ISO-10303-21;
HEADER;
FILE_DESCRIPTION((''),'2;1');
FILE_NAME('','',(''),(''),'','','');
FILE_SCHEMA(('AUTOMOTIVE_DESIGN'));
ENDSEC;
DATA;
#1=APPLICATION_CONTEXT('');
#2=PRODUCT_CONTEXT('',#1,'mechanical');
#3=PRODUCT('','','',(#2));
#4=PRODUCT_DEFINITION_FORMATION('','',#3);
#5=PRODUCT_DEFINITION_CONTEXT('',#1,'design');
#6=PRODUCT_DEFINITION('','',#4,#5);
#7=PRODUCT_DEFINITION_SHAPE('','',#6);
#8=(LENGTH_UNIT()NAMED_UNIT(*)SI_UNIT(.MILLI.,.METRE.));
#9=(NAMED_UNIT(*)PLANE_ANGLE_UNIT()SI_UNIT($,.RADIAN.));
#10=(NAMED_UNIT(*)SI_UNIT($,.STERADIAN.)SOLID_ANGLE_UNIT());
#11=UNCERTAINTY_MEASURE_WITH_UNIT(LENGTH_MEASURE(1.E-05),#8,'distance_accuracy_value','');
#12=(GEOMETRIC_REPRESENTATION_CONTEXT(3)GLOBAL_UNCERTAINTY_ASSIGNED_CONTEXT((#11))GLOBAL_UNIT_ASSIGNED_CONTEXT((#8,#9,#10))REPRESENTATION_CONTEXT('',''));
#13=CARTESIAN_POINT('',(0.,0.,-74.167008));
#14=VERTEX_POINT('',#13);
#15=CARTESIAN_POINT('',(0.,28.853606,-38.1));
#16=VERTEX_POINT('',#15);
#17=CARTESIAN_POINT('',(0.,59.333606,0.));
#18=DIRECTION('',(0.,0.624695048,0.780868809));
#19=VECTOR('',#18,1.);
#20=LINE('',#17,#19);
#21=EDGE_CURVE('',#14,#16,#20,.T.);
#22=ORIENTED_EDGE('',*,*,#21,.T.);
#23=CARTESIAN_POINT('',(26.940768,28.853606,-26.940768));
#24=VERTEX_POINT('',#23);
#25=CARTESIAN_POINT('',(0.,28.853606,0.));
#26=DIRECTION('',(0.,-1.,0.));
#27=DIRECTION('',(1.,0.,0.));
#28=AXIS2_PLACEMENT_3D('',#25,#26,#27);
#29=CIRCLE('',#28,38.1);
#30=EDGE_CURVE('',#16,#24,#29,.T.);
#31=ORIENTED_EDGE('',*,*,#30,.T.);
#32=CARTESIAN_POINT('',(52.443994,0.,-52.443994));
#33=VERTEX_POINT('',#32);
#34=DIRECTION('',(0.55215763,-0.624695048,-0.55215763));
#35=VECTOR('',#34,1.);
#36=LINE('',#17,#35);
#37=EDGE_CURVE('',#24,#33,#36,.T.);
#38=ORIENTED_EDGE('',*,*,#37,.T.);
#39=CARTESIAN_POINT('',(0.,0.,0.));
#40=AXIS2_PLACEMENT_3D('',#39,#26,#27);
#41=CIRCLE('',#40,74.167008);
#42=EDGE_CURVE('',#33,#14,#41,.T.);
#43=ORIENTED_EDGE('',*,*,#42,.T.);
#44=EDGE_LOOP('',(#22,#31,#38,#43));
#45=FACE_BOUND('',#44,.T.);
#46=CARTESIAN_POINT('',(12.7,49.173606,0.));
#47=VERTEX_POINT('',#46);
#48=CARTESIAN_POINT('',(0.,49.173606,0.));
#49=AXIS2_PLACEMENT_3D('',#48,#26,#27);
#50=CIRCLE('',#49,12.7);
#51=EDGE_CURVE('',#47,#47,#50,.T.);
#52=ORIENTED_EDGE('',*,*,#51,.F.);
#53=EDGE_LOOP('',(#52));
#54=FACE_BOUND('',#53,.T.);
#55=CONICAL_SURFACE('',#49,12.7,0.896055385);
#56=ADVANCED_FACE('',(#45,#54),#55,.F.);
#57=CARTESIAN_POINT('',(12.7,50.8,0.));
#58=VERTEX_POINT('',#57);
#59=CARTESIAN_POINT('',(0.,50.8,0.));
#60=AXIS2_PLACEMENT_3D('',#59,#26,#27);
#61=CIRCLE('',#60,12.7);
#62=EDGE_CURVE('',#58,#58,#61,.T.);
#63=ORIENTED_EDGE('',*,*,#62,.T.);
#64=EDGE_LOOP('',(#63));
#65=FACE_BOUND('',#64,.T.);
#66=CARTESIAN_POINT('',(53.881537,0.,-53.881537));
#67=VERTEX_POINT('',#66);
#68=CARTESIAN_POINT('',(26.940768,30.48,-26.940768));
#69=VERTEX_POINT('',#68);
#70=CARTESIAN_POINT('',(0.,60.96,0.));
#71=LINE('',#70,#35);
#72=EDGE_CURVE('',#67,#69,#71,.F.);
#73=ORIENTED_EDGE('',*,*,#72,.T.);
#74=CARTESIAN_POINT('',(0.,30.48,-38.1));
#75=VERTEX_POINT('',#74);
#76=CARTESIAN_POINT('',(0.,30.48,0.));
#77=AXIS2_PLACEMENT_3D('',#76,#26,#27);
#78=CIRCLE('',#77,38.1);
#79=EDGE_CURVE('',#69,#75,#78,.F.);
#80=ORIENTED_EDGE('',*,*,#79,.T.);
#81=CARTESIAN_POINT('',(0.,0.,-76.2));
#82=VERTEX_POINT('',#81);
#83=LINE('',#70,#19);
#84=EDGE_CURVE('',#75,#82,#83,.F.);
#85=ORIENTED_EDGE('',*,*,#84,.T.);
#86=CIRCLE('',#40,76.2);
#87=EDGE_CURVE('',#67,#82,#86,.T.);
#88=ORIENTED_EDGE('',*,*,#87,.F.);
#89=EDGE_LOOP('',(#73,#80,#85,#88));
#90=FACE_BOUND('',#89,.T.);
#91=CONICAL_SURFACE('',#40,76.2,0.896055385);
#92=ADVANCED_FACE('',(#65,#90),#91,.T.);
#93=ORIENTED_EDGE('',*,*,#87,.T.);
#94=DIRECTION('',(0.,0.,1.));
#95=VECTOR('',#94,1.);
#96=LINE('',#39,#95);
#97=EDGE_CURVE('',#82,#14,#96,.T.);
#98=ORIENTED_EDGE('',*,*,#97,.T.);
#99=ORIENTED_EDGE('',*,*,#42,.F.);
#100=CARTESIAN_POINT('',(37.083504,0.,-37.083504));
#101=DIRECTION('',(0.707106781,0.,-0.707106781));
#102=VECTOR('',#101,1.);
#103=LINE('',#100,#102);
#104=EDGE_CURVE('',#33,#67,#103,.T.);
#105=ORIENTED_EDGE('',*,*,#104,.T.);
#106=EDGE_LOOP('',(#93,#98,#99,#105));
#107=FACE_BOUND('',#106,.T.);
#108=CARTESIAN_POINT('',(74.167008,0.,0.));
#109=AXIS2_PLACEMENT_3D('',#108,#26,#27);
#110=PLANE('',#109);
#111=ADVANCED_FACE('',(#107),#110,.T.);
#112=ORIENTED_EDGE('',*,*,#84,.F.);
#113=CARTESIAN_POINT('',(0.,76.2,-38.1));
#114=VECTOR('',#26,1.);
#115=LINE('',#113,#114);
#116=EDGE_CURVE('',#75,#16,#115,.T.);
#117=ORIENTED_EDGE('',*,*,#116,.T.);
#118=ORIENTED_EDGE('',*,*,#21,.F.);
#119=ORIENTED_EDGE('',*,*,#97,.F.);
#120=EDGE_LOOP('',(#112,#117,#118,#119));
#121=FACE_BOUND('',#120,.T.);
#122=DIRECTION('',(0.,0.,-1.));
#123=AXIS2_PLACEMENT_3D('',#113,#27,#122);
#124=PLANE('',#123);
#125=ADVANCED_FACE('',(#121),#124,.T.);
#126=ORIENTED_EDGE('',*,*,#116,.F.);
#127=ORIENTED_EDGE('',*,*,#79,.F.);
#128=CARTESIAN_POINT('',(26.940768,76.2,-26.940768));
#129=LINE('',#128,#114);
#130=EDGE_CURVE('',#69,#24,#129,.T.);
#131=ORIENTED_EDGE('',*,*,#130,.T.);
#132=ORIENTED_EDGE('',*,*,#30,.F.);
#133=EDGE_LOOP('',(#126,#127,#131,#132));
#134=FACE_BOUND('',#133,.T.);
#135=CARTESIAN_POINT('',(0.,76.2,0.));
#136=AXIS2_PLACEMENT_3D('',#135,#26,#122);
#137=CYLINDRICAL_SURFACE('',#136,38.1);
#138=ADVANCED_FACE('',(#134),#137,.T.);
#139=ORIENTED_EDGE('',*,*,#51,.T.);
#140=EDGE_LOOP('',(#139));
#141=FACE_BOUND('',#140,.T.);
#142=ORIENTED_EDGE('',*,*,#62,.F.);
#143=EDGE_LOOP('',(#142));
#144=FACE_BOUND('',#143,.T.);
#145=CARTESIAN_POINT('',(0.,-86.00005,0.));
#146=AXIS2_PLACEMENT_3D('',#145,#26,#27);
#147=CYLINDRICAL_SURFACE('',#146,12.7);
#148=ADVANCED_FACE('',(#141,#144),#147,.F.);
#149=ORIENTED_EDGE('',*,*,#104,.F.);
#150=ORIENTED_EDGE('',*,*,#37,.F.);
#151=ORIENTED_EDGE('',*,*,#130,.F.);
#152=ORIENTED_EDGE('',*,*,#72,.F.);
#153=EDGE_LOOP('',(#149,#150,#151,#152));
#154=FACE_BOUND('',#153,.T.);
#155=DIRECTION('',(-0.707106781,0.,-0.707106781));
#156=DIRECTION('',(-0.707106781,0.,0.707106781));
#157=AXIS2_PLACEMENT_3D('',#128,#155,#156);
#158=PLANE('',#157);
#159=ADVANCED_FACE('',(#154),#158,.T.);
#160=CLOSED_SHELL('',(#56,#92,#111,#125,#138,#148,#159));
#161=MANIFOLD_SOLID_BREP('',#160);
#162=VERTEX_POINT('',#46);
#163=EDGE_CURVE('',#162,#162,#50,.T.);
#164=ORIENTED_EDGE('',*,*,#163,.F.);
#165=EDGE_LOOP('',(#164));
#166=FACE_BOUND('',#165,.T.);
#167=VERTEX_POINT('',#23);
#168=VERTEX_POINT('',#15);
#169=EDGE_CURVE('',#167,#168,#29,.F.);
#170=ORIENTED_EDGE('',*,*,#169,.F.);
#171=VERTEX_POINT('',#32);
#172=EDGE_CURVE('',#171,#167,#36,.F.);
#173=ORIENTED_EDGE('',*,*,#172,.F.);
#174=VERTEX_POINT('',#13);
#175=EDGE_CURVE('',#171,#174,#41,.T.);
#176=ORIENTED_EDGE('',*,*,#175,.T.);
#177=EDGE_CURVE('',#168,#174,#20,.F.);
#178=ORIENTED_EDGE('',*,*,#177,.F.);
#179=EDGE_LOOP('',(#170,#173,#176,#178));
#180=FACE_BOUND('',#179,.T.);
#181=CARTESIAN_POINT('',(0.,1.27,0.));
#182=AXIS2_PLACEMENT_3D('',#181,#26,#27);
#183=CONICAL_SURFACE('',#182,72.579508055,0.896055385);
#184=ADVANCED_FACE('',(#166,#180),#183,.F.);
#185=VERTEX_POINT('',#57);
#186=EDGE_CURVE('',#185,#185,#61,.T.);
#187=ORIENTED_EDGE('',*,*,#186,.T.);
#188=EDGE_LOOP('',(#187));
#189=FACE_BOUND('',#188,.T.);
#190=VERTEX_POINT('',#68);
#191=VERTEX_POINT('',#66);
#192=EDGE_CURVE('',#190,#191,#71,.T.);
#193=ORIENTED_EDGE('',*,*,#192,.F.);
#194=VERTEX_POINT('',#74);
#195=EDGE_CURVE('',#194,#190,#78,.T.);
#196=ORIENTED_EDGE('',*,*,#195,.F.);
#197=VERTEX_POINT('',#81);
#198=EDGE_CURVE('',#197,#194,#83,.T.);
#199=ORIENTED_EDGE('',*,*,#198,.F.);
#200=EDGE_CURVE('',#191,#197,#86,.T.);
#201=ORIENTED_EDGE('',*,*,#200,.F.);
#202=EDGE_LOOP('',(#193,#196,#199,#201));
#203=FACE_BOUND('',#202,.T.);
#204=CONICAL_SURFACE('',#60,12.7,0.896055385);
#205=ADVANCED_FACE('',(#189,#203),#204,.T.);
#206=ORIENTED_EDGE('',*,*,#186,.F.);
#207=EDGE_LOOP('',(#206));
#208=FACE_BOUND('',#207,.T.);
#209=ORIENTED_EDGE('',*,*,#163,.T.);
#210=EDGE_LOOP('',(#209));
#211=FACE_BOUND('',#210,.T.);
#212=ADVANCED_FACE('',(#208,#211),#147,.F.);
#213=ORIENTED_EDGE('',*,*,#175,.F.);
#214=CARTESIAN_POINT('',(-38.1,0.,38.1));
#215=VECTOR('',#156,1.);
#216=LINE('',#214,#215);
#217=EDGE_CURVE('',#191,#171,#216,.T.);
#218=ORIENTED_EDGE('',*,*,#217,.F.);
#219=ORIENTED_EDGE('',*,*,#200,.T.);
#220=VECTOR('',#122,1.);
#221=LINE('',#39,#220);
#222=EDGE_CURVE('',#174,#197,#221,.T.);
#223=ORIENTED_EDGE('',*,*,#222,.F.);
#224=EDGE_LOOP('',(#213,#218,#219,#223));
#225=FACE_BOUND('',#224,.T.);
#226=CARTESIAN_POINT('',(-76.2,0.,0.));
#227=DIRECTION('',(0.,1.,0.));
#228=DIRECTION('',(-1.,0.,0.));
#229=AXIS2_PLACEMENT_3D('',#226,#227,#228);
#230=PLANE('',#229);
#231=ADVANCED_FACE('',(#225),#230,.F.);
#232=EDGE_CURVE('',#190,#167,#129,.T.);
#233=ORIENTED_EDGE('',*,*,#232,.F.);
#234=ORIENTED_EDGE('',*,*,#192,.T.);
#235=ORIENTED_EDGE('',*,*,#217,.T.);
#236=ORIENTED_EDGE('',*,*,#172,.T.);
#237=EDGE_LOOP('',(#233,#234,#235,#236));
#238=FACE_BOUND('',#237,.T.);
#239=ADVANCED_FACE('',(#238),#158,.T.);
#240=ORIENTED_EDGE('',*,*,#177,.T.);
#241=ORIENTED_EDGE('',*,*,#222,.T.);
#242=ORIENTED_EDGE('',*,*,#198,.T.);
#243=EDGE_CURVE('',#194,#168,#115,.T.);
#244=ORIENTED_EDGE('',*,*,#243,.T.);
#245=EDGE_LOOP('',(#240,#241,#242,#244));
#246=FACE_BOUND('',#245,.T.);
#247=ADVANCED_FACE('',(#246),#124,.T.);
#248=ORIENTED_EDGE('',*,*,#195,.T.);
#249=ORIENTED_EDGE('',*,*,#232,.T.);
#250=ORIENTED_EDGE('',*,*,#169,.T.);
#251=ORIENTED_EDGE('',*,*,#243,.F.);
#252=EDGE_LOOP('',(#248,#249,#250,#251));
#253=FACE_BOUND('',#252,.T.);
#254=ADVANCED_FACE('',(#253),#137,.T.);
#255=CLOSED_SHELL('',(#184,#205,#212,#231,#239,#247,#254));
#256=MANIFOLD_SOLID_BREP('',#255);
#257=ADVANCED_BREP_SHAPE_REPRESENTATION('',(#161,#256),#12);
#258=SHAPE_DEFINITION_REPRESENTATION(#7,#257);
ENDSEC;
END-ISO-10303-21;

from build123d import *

# Parameters (mm, degrees)
CUT_EXTRUDE1_DEPTH = 76.2


# Read off the part's stored shape, not the designer's step: Revolve2
with BuildPart() as part:
    # Revolve2 outline → Revolve2 (revolve)
    with BuildSketch(Plane.XY):
        Polygon((12.7, 49.173606444), (74.167008055, 0), (76.2, 0), (12.7, 50.8), align=None)
    revolve(axis=Axis((0, 0, 0), (0, 1, 0)))


with BuildPart() as body_2:
    # Revolve2 2 outline → Revolve2 2 (revolve)
    with BuildSketch(Plane.XY):
        Polygon((12.7, 50.8), (12.7, 49.173606444), (74.167008055, 0), (76.2, 0), align=None)
    revolve(axis=Axis((0, 0, 0), (0, 1, 0)))


with BuildPart() as cut_extrude1_tool:
    # Sketch2 → Cut-Extrude1 (new, symmetric)
    with BuildSketch(Plane(origin=(0, 0, 0), x_dir=(1, 0, 0), z_dir=(0, 1, 0))):
        with BuildLine():
            Line((0, 38.1), (0, 76.2))
            ThreePointArc((0, 76.2), (29.160477546, 70.399620377), (53.881536726, 53.881536726))
            Line((53.881536726, 53.881536726), (26.940768363, 26.940768363))
            ThreePointArc((26.940768363, 26.940768363), (14.580238773, 35.199810189), (0, 38.1))
        make_face()
    extrude(amount=CUT_EXTRUDE1_DEPTH, both=True)


with BuildPart() as part_1:
    add(part.part)

    # Cut-Extrude1: cut by cut_extrude1_tool
    add(cut_extrude1_tool.part, mode=Mode.SUBTRACT)


with BuildPart() as body_2_1:
    add(body_2.part)

    # Cut-Extrude1: cut by cut_extrude1_tool
    add(cut_extrude1_tool.part, mode=Mode.SUBTRACT)


solid = Compound([part_1.part, body_2_1.part])
